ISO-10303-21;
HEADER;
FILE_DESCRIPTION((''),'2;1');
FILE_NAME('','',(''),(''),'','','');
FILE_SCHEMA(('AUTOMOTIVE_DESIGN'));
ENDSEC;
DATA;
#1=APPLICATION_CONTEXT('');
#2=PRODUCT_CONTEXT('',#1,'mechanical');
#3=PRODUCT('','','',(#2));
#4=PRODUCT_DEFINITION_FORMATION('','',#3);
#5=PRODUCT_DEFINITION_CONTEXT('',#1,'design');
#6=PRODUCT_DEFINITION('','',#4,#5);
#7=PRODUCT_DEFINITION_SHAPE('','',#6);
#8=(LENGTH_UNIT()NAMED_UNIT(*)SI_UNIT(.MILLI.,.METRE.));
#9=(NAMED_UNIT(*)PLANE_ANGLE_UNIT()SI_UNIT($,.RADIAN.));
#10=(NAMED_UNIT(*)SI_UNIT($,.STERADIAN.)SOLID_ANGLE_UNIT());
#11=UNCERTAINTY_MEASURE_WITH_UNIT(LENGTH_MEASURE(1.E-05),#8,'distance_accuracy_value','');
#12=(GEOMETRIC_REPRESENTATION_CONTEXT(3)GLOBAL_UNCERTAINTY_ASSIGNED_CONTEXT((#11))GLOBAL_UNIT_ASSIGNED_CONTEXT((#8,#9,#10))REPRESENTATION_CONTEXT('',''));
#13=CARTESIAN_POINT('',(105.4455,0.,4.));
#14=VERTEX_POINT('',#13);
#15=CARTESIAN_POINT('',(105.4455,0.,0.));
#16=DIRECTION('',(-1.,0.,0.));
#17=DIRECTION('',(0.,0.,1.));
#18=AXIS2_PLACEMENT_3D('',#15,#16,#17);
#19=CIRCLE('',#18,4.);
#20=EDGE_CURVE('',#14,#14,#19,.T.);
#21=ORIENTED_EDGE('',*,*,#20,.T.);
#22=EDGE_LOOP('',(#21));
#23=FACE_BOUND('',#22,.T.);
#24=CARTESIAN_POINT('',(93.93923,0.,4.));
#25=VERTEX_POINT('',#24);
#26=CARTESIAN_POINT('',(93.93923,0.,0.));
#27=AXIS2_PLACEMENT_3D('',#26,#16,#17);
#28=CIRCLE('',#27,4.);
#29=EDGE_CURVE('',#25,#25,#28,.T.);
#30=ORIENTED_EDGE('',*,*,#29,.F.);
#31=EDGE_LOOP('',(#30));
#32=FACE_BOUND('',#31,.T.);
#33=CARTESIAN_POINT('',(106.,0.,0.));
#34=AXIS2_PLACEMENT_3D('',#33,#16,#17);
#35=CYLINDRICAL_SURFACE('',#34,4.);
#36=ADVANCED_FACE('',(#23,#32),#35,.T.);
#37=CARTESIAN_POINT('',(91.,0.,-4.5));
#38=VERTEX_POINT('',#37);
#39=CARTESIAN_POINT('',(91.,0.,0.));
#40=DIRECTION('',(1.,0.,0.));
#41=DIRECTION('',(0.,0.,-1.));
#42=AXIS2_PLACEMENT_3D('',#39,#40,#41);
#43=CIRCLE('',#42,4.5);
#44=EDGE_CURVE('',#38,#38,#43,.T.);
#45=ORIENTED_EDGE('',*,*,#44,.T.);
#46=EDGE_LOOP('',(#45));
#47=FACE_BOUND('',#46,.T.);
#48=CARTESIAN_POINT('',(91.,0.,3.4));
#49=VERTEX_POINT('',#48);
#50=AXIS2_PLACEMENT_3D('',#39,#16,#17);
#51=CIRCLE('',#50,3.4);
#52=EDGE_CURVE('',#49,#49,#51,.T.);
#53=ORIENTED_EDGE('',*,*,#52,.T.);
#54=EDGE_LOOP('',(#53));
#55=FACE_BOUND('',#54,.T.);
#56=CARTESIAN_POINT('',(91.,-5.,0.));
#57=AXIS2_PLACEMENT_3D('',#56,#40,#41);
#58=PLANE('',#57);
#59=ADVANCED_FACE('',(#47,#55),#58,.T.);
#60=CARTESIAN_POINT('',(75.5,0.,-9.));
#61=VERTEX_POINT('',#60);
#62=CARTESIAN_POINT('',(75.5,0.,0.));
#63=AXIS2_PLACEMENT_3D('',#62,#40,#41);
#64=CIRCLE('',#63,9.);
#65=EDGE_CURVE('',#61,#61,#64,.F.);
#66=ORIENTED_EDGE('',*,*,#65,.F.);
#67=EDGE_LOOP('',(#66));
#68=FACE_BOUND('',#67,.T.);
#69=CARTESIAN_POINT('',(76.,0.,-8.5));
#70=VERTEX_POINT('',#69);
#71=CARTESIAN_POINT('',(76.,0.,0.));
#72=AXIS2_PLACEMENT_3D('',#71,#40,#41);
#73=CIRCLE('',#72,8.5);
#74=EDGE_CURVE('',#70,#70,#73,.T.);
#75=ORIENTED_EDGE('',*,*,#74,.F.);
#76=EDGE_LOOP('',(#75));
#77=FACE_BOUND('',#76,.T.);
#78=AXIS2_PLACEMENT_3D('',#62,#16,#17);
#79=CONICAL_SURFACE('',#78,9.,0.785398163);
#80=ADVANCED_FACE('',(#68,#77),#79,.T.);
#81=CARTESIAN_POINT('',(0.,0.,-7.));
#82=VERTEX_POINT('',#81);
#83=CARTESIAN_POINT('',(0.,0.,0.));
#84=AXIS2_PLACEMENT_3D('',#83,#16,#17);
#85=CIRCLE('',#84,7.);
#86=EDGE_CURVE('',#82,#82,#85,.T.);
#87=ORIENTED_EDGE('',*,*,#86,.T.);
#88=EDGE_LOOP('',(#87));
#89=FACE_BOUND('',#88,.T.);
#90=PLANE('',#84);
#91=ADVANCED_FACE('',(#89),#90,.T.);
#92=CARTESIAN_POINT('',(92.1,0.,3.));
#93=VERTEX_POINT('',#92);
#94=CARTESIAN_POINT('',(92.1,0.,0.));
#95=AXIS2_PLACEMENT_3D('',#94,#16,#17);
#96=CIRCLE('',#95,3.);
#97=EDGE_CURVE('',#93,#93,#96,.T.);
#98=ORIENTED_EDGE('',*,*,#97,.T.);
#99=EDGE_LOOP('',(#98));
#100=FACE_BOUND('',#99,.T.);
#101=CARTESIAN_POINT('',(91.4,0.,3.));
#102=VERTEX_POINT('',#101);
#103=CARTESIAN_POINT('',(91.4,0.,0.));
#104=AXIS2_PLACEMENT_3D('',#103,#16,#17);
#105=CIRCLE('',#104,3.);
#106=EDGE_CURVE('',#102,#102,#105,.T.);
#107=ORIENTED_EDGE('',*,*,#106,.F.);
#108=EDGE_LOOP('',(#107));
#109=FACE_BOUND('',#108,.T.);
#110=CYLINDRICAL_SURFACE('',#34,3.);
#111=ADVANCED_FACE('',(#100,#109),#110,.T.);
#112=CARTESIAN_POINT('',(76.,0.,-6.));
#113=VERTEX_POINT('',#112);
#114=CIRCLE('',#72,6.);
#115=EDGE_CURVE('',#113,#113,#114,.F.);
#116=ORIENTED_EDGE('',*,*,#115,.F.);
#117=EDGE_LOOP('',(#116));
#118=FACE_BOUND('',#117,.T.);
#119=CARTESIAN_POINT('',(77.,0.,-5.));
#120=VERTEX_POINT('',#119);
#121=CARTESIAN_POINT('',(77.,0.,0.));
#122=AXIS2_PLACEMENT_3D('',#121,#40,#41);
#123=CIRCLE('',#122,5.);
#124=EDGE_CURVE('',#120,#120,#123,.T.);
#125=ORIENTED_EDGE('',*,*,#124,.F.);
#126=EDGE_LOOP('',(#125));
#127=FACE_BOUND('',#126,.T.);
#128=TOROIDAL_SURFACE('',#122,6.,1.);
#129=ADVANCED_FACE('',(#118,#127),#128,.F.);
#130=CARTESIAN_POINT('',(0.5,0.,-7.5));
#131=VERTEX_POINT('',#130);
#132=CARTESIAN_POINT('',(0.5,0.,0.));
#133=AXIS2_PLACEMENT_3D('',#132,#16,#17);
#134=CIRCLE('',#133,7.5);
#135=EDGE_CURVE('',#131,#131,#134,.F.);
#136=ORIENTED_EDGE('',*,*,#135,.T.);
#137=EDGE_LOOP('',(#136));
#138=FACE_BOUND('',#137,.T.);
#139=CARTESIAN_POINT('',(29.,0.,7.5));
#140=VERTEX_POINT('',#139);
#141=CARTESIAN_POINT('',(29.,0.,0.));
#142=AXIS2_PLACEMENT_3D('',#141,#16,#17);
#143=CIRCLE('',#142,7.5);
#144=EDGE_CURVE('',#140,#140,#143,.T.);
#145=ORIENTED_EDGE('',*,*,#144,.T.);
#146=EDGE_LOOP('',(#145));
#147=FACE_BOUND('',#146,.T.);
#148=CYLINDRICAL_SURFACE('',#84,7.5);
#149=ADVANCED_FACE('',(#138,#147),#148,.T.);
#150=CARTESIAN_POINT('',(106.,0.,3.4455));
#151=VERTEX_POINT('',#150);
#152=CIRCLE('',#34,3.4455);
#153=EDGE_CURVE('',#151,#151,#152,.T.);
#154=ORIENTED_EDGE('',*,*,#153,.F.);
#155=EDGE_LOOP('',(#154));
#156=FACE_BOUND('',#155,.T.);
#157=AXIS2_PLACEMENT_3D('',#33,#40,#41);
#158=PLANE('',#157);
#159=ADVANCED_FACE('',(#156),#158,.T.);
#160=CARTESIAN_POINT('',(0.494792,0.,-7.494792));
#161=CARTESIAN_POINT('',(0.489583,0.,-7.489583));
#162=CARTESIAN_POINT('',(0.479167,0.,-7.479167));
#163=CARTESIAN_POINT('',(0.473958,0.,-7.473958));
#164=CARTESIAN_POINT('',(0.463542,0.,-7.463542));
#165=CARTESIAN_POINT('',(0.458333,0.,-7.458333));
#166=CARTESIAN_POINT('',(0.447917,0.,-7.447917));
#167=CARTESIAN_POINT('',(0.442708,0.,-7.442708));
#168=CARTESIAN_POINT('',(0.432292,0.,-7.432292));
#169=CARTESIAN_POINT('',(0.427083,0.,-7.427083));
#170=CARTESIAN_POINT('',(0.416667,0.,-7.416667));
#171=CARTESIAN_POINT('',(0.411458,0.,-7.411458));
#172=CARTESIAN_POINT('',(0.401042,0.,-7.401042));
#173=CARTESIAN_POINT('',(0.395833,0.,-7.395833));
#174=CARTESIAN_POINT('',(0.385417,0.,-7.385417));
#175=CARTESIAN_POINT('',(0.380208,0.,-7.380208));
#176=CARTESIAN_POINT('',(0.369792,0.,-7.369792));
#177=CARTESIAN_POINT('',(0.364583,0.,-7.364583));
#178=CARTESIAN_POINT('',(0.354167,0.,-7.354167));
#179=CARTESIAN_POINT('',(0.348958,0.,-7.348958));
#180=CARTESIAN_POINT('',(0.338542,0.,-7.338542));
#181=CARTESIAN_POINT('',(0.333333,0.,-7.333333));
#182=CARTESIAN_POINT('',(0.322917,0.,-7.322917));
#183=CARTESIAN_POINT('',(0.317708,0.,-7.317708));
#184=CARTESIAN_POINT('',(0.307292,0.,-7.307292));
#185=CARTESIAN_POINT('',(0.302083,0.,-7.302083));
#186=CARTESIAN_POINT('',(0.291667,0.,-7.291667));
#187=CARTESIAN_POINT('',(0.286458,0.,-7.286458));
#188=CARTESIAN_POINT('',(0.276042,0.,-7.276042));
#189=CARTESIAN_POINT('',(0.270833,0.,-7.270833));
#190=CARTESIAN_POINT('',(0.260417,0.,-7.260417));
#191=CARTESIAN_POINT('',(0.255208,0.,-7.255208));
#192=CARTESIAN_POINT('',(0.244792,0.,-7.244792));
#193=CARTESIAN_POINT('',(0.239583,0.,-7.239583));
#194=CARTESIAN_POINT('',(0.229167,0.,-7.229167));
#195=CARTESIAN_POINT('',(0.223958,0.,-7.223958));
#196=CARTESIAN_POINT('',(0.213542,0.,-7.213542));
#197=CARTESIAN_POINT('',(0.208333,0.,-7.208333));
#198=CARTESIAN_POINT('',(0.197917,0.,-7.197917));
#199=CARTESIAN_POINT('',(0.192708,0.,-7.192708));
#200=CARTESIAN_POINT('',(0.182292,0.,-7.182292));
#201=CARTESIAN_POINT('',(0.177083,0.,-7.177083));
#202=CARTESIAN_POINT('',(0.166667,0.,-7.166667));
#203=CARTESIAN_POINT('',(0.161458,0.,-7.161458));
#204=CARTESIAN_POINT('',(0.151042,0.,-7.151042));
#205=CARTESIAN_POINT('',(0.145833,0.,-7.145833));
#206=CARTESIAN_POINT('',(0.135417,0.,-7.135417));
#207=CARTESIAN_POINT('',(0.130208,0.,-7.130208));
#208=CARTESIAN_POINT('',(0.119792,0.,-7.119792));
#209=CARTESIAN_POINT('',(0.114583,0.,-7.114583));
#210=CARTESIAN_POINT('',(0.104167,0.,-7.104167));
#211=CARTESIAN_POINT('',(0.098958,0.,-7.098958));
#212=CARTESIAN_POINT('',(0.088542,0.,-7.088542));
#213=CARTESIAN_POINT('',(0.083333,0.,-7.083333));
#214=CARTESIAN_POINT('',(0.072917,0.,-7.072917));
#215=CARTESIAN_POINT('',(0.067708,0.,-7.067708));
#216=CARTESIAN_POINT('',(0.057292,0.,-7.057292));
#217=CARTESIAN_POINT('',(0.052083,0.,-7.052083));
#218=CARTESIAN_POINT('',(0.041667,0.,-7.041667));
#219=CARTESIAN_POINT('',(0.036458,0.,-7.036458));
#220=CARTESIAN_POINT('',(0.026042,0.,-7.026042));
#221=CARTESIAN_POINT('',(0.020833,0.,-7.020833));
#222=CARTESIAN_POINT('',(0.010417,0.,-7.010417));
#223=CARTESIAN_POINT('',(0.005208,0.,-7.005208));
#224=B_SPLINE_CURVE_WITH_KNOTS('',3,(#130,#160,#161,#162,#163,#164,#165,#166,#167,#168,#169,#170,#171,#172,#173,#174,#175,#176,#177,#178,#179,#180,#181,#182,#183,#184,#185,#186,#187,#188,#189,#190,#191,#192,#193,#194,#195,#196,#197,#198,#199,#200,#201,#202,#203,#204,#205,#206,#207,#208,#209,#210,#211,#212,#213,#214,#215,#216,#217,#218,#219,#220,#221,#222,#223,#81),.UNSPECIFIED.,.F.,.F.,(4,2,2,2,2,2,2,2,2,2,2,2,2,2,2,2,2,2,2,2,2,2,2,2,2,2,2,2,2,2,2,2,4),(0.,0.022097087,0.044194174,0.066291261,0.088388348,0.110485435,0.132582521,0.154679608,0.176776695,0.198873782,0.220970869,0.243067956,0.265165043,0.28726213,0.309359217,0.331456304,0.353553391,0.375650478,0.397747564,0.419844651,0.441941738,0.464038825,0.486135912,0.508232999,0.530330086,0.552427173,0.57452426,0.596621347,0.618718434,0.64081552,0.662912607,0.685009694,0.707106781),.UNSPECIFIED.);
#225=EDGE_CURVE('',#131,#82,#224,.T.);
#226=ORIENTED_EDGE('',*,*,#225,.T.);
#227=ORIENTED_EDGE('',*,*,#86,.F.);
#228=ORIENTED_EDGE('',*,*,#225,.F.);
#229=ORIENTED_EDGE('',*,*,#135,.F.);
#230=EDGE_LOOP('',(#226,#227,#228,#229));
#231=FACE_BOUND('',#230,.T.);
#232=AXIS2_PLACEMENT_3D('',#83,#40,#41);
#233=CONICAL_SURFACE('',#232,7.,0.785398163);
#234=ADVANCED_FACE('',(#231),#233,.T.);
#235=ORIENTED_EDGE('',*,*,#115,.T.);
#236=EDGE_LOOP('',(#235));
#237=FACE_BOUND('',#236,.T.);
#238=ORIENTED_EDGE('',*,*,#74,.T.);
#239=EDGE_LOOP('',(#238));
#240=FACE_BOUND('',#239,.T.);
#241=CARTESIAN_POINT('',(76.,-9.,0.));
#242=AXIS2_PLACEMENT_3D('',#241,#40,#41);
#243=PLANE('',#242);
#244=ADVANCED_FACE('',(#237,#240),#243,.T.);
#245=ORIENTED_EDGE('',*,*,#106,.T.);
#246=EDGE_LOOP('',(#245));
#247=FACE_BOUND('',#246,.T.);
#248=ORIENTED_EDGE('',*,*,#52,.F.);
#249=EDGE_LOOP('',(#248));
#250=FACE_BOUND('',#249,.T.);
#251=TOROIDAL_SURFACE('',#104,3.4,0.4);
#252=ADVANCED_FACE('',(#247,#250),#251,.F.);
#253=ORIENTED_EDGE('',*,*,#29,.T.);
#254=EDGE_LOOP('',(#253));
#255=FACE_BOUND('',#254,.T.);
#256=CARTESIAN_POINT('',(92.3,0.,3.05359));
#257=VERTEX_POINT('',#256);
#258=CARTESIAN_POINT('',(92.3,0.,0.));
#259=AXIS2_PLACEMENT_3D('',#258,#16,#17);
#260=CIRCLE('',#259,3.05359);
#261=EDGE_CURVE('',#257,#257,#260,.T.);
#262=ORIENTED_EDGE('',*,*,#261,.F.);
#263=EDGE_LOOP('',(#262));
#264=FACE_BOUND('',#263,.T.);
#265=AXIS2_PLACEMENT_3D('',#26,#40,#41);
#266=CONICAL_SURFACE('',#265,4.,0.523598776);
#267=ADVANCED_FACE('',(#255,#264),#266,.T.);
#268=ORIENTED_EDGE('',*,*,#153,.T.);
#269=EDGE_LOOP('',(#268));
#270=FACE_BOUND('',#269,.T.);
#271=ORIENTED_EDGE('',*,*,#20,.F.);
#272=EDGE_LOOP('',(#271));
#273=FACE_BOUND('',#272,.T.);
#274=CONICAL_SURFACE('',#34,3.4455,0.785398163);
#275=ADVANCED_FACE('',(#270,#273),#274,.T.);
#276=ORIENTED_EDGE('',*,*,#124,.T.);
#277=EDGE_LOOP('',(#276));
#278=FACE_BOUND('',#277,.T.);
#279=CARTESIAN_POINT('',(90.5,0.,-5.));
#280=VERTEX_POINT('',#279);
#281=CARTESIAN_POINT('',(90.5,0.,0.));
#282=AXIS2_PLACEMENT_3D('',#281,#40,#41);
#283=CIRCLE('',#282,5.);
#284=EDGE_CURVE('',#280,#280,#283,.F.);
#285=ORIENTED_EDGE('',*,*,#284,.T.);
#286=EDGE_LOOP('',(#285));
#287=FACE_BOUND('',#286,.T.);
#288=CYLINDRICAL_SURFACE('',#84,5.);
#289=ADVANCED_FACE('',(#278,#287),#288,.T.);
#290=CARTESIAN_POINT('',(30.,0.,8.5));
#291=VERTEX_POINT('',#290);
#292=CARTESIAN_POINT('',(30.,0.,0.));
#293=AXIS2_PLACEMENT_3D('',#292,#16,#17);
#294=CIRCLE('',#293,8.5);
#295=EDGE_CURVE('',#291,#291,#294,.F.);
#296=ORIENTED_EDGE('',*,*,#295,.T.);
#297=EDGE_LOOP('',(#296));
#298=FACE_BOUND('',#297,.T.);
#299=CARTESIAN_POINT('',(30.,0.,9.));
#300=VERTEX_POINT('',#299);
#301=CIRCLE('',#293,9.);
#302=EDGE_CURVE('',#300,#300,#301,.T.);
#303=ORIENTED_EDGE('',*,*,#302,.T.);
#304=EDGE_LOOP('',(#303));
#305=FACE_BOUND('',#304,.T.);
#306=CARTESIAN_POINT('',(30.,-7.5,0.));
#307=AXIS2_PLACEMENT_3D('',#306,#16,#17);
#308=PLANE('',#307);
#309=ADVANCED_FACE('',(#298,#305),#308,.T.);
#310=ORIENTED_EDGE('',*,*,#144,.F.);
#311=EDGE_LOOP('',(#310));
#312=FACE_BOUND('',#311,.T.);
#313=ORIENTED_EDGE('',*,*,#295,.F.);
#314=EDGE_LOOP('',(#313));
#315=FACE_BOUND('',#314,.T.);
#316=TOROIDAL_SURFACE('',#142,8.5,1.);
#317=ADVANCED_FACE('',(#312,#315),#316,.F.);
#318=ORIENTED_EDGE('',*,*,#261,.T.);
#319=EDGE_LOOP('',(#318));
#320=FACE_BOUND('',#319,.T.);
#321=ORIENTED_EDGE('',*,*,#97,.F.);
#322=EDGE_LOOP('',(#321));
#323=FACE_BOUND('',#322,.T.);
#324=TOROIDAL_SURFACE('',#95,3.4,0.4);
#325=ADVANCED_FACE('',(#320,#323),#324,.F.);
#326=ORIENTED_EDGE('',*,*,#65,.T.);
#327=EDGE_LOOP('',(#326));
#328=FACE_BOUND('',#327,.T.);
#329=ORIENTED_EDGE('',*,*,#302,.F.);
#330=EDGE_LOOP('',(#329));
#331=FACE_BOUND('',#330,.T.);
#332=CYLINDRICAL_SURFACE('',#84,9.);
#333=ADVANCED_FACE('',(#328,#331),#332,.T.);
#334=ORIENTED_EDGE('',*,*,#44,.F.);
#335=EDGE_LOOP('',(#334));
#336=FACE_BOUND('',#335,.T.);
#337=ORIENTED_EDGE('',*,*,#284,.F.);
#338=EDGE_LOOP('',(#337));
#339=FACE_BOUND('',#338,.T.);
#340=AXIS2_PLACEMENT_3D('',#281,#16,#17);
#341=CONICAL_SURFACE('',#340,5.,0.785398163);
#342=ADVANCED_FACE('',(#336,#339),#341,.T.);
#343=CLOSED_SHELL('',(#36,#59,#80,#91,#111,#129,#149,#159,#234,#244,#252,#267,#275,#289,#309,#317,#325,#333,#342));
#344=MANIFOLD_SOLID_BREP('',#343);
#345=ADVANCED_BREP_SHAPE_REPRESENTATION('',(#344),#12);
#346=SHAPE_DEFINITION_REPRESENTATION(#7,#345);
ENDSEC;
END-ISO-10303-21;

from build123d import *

# Parameters (mm, degrees)
FILLET1_R           = 1
CHAMFER1_SIZE       = 0.5
CHAMFER2_SIZE       = 0.5
SKETCH2_R           = 4.1
BOSS_EXTRUDE1_DEPTH = 15


# Read off the part's stored shape, not the designer's step: M8x1.0 Machine Threads Stud1
with BuildPart() as part:
    # Sketch1 → Revolve1 (revolve)
    with BuildSketch(Plane.XY, mode=Mode.PRIVATE) as revolve1_sk:
        Polygon((0, 0), (0, -7.5), (30, -7.5), (30, -9), (76, -9), (76, -5), (91, -5), (91, 0), align=None)
    revolve(revolve1_sk.sketch.rotate(Axis((0, 0, 0), (1, 0, 0)), 270), axis=Axis((0, 0, 0), (1, 0, 0)))

    # Fillet1
    fillet1_edges = [part.edges().sort_by_distance(p)[0] for p in [
        (76, 0, -5),
        (30, 0, -7.5),
    ]]
    fillet(fillet1_edges, radius=FILLET1_R)

    # Chamfer1
    chamfer1_edges = [part.edges().sort_by_distance(p)[0] for p in [
        (0, 0, -7.5),
    ]]
    chamfer(chamfer1_edges, length=CHAMFER1_SIZE)

    # Chamfer2
    chamfer2_edges = [part.edges().sort_by_distance(p)[0] for p in [
        (91, 0, -5),
        (76, 0, -9),
    ]]
    chamfer(chamfer2_edges, length=CHAMFER2_SIZE)

    # Sketch2 → Boss-Extrude1 (add)
    with BuildSketch(Plane(origin=(91, 0, 0), x_dir=(0, 0, -1), z_dir=(1, 0, 0))):
        Circle(SKETCH2_R)
    extrude(amount=BOSS_EXTRUDE1_DEPTH)

    # M8x1.0 Machine Threads Stud1 outline → M8x1.0 Machine Threads Stud1 (revolve, cut)
    with BuildSketch(Plane.YX):
        with BuildLine():
            ThreePointArc((3, 91.4), (3.117157288, 91.117157288), (3.4, 91))
            Line((3.4, 91), (4.1, 91))
            Line((4.1, 91), (4.1, 106))
            Line((4.1, 106), (3.4455, 106))
            Line((3.4455, 106), (4, 105.4455))
            Line((4, 105.4455), (4, 93.939230485))
            Line((4, 93.939230485), (3.053589838, 92.3))
            ThreePointArc((3.053589838, 92.3), (3.013629669, 92.203527618), (3, 92.1))
            Line((3, 92.1), (3, 91.4))
        make_face()
    revolve(axis=Axis((0, 0, 0), (1, 0, 0)), mode=Mode.SUBTRACT)


solid = part.part
